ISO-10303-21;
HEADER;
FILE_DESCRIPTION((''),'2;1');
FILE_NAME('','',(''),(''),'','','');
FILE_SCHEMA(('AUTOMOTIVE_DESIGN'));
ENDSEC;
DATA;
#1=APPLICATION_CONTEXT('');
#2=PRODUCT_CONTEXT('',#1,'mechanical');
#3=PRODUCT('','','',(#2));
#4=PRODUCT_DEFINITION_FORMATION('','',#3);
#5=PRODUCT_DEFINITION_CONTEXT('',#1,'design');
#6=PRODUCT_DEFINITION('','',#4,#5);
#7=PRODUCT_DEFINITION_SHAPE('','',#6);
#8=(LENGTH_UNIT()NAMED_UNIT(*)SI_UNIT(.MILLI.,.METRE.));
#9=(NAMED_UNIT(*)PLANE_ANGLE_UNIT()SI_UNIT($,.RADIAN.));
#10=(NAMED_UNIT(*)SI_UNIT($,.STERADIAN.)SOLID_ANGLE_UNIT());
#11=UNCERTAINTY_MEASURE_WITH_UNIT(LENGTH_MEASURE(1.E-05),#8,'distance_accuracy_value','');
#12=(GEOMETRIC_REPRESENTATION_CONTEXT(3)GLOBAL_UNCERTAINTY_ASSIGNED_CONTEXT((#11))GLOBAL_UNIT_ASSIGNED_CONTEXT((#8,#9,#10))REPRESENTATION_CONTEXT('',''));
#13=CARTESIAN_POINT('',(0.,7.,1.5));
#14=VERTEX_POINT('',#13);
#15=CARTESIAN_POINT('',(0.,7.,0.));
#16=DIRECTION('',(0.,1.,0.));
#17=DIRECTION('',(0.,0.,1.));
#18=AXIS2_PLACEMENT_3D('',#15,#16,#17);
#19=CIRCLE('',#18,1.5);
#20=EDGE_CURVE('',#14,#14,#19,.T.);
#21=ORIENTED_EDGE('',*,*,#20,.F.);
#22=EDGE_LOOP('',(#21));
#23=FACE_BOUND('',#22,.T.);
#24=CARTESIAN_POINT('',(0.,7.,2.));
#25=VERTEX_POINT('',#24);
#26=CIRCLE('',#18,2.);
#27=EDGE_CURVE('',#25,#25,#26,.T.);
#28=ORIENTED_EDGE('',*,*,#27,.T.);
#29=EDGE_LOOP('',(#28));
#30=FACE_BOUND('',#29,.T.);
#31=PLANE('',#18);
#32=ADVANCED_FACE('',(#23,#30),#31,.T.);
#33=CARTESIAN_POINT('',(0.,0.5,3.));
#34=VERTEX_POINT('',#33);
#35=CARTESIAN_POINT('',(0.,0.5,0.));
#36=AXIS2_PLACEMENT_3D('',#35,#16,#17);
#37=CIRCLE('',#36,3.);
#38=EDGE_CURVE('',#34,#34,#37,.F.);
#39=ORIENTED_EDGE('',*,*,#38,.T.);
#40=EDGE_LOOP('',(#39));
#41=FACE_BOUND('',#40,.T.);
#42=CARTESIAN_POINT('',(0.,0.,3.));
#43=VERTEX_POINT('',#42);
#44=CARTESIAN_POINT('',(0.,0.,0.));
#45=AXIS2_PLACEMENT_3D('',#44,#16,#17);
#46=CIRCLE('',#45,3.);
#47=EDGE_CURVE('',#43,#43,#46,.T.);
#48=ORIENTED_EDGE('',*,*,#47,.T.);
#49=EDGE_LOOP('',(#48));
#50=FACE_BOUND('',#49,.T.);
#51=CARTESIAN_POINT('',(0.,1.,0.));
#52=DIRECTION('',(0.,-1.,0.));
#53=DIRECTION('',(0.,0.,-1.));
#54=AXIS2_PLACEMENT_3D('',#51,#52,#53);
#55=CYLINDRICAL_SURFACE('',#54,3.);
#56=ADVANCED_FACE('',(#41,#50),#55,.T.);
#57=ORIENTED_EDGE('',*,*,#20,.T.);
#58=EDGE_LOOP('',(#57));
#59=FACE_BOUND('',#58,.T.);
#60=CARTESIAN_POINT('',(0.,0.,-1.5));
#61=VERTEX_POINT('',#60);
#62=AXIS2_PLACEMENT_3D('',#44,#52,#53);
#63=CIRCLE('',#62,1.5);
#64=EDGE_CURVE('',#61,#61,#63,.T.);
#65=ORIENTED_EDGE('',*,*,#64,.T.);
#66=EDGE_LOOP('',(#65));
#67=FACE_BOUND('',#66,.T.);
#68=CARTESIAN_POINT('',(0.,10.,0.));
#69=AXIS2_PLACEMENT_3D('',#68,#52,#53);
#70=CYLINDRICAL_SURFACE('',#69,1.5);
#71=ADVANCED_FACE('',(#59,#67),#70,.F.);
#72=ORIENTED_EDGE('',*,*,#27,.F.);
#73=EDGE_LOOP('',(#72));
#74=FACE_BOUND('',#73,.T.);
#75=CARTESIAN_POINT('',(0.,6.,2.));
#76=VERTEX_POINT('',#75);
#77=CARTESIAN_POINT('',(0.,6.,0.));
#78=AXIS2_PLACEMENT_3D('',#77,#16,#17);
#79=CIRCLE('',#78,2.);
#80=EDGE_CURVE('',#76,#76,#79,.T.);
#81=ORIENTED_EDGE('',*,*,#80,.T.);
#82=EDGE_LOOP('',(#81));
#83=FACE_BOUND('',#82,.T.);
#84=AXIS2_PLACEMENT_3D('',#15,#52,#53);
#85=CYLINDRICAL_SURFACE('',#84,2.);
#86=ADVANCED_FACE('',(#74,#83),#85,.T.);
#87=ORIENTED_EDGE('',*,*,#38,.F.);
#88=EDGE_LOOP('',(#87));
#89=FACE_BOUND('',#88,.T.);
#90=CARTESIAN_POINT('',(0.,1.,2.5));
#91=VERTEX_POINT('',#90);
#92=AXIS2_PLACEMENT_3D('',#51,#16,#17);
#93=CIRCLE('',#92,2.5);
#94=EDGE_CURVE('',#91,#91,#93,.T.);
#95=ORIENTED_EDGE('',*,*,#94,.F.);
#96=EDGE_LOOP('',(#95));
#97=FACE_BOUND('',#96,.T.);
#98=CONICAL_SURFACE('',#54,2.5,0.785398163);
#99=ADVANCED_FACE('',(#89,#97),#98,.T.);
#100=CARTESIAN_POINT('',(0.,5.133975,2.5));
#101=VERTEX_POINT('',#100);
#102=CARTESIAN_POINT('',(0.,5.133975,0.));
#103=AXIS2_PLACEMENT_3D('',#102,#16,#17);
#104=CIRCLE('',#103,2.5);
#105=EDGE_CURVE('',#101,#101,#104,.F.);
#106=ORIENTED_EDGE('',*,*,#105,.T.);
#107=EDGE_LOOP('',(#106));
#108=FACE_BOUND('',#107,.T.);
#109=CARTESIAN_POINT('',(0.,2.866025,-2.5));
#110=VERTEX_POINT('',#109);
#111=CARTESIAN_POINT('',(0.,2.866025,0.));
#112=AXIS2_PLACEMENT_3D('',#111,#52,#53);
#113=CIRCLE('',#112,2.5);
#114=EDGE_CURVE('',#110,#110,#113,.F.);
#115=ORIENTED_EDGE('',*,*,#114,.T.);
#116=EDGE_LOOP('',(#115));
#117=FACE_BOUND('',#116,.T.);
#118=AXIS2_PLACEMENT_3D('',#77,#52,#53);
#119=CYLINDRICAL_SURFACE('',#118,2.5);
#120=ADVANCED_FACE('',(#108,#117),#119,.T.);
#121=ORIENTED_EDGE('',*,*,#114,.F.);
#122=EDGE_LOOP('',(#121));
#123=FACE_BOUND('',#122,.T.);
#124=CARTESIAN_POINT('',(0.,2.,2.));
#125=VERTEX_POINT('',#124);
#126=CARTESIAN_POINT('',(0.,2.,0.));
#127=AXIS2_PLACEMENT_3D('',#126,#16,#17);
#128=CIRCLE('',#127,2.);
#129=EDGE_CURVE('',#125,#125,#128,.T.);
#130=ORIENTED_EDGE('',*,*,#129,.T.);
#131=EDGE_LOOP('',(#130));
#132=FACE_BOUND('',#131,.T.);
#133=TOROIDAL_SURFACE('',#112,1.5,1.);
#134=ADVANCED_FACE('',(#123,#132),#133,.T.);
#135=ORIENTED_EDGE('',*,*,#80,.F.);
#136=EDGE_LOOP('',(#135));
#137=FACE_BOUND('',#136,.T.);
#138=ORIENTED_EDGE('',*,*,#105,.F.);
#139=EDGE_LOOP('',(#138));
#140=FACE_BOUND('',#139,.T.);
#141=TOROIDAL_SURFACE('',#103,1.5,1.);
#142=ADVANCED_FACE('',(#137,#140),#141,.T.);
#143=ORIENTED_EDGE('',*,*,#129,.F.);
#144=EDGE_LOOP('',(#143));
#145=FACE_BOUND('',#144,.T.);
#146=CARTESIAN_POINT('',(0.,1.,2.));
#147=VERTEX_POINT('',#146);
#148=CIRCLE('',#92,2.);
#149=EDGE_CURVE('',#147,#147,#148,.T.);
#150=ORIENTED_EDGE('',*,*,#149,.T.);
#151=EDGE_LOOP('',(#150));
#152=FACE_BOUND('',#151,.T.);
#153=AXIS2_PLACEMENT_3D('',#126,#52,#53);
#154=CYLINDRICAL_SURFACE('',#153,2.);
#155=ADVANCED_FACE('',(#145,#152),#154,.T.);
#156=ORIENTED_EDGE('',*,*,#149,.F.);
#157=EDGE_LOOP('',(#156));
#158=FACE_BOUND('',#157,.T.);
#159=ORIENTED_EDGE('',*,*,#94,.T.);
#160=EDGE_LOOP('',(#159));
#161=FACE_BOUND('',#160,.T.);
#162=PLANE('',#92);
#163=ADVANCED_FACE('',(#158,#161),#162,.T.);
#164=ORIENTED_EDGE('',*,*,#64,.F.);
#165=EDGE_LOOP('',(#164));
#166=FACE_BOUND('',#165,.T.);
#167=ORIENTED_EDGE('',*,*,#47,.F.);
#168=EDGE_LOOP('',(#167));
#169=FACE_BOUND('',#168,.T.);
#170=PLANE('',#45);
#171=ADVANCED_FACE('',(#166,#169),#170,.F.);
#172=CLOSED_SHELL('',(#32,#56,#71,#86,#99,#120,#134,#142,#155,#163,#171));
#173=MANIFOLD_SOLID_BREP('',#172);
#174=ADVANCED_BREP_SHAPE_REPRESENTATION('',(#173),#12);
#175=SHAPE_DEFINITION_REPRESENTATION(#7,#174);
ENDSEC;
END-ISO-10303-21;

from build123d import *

# Parameters (mm, degrees)
SKETCH1_R           = 3
BOSS_EXTRUDE1_DEPTH = 1
CHAMFER1_SIZE       = 0.5
SKETCH2_R           = 2
BOSS_EXTRUDE2_DEPTH = 1
SKETCH3_R           = 2.5
BOSS_EXTRUDE3_DEPTH = 4
SKETCH4_R           = 2
BOSS_EXTRUDE4_DEPTH = 1
FILLET1_R           = 1
FILLET2_R           = 1
SKETCH5_R           = 1.5
CUT_EXTRUDE1_DEPTH  = 10


with BuildPart() as part:
    # Sketch1 → Boss-Extrude1 (new body)
    with BuildSketch(Plane(origin=(0, 0, 0), x_dir=(1, 0, 0), z_dir=(0, 1, 0))):
        with Locations(Location((0, 0, 0), (0, 0, 270))):
            Circle(SKETCH1_R)
    extrude(amount=BOSS_EXTRUDE1_DEPTH)

    # Chamfer1
    chamfer1_edges = [part.edges().sort_by_distance(p)[0] for p in [
        (0, 1, -3),
    ]]
    chamfer(chamfer1_edges, length=CHAMFER1_SIZE)

    # Sketch2 → Boss-Extrude2 (add)
    with BuildSketch(Plane(origin=(0, 1, 0), x_dir=(1, 0, 0), z_dir=(0, 1, 0))):
        with Locations(Location((0, 0, 0), (0, 0, 270))):
            Circle(SKETCH2_R)
    extrude(amount=BOSS_EXTRUDE2_DEPTH)

    # Sketch3 → Boss-Extrude3 (add)
    with BuildSketch(Plane(origin=(0, 2, 0), x_dir=(1, 0, 0), z_dir=(0, 1, 0))):
        with Locations(Location((0, 0, 0), (0, 0, 270))):
            Circle(SKETCH3_R)
    extrude(amount=BOSS_EXTRUDE3_DEPTH)

    # Sketch4 → Boss-Extrude4 (add)
    with BuildSketch(Plane(origin=(0, 6, 0), x_dir=(1, 0, 0), z_dir=(0, 1, 0))):
        with Locations(Location((0, 0, 0), (0, 0, 270))):
            Circle(SKETCH4_R)
    extrude(amount=BOSS_EXTRUDE4_DEPTH)

    # Fillet1
    # the kernel refuses this fillet: 1 mm, written as the material it takes off along each edge
    with BuildSketch(Plane(origin=(0, 6, 0), x_dir=(0, 0, 1), z_dir=(-1, 0, 0))) as fillet1_piece_1:
        with BuildLine():
            CenterArc((1.5, -0.866025404), FILLET1_R, 0, 60)
            Line((2, 0), (2.01, 0.017320508))
            ThreePointArc((2.01, 0.017320508), (2.25, 0.02), (2.5, 0.02))
            Line((2.5, 0.02), (2.52, 0))
            Line((2.52, 0), (2.52, -0.866025404))
            Line((2.52, -0.866025404), (2.5, -0.866025404))
        make_face()
    revolve(axis=Axis((0, 6, 0), (0, 1, 0)), mode=Mode.SUBTRACT)

    # Fillet2
    # the kernel refuses this fillet: 1 mm, written as the material it takes off along each edge
    with BuildSketch(Plane(origin=(0, 2, 0), x_dir=(0, 0, 1), z_dir=(-1, 0, 0))) as fillet2_piece_1:
        with BuildLine():
            CenterArc((1.5, 0.866025404), FILLET2_R, 300, 60)
            Line((2, 0), (2.01, -0.017320508))
            ThreePointArc((2.01, -0.017320508), (2.25, -0.02), (2.5, -0.02))
            Line((2.5, -0.02), (2.52, 0))
            Line((2.52, 0), (2.52, 0.866025404))
            Line((2.52, 0.866025404), (2.5, 0.866025404))
        make_face()
    revolve(axis=Axis((0, 2, 0), (0, 1, 0)), mode=Mode.SUBTRACT)

    # Sketch5 → Cut-Extrude1 (cut)
    with BuildSketch(Plane.XZ):
        with Locations(Location((0, 0, 0), (0, 0, 270))):
            Circle(SKETCH5_R)
    extrude(amount=-CUT_EXTRUDE1_DEPTH, mode=Mode.SUBTRACT)


solid = part.part
